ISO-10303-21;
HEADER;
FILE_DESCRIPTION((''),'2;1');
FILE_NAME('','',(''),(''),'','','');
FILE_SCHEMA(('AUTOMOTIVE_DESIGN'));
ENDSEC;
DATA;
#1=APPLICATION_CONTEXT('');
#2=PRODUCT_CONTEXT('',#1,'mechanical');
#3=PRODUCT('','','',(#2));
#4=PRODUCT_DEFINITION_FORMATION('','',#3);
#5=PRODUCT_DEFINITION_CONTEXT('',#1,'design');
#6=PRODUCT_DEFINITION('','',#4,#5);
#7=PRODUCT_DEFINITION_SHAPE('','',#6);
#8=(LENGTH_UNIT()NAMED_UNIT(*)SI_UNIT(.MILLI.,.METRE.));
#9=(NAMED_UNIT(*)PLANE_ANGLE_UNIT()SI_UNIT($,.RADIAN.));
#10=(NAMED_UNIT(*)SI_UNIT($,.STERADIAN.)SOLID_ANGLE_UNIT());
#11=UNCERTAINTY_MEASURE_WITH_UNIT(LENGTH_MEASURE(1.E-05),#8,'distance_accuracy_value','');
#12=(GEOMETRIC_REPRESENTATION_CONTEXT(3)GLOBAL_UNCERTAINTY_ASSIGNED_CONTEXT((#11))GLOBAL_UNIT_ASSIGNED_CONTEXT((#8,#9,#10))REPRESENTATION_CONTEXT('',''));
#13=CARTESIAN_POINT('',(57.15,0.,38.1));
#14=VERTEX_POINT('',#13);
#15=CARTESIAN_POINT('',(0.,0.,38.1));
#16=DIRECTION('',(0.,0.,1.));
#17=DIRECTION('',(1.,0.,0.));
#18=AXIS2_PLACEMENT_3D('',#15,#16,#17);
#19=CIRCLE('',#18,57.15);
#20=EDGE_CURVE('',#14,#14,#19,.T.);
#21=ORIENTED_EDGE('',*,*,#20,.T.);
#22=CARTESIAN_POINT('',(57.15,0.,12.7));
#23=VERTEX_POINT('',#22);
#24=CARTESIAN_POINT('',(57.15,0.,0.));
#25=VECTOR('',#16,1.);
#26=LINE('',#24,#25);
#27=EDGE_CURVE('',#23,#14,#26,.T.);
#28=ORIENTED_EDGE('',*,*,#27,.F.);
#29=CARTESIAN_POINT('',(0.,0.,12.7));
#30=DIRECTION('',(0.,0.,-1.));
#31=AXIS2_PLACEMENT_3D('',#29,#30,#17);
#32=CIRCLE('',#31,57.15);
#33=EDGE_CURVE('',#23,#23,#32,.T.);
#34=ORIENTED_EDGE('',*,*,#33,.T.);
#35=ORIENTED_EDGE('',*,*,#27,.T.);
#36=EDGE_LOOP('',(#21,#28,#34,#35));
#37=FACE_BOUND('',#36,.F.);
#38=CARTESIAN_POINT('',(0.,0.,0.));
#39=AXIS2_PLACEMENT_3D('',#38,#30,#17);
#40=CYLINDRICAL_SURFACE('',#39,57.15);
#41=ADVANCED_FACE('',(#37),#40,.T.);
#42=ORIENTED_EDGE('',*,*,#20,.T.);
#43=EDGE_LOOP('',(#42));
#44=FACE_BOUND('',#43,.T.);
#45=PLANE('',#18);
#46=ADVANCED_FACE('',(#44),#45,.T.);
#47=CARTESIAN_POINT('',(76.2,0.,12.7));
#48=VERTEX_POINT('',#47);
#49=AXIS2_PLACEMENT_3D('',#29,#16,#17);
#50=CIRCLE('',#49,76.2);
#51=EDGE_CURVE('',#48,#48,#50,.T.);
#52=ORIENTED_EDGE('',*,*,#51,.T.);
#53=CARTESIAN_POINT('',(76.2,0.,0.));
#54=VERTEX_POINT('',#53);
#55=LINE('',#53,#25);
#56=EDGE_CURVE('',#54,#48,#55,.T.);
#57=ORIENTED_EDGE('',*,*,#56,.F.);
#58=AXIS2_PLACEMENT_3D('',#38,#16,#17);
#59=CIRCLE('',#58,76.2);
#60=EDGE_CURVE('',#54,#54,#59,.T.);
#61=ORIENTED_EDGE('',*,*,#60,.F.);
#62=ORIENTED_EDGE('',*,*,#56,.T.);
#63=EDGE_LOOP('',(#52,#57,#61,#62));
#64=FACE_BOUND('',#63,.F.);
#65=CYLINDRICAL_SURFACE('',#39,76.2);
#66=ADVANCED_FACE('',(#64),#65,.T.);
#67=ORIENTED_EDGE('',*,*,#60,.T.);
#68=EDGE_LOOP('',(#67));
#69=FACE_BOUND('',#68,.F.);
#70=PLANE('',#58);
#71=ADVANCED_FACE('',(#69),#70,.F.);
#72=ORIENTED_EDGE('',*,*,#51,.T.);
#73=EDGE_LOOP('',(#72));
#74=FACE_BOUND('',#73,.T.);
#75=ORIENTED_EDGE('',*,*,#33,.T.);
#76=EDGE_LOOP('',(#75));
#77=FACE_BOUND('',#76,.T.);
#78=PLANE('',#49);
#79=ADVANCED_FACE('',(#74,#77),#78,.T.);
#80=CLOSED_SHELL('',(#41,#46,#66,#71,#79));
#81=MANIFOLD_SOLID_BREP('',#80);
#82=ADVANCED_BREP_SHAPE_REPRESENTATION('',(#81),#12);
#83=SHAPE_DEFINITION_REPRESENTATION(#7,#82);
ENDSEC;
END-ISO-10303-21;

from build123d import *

# Parameters (mm, degrees)
F0_R     = 76.2
F1_DEPTH = 12.7
F6_R     = 57.15
F7_DEPTH = 38.1


# Not quite as in the source:
# - the program builds the solid bodies; features that only make, move or delete a surface that nothing else refers to are left out


with BuildPart() as f1:
    # F0 (on Top) → F1 (new body)
    with BuildSketch(Plane.XY):
        Circle(F0_R)
    extrude(amount=F1_DEPTH)

    # F6 (on Top) → F7 (join)
    with BuildSketch(Plane.XY):
        Circle(F6_R)
    extrude(amount=F7_DEPTH)


solid = f1.part
